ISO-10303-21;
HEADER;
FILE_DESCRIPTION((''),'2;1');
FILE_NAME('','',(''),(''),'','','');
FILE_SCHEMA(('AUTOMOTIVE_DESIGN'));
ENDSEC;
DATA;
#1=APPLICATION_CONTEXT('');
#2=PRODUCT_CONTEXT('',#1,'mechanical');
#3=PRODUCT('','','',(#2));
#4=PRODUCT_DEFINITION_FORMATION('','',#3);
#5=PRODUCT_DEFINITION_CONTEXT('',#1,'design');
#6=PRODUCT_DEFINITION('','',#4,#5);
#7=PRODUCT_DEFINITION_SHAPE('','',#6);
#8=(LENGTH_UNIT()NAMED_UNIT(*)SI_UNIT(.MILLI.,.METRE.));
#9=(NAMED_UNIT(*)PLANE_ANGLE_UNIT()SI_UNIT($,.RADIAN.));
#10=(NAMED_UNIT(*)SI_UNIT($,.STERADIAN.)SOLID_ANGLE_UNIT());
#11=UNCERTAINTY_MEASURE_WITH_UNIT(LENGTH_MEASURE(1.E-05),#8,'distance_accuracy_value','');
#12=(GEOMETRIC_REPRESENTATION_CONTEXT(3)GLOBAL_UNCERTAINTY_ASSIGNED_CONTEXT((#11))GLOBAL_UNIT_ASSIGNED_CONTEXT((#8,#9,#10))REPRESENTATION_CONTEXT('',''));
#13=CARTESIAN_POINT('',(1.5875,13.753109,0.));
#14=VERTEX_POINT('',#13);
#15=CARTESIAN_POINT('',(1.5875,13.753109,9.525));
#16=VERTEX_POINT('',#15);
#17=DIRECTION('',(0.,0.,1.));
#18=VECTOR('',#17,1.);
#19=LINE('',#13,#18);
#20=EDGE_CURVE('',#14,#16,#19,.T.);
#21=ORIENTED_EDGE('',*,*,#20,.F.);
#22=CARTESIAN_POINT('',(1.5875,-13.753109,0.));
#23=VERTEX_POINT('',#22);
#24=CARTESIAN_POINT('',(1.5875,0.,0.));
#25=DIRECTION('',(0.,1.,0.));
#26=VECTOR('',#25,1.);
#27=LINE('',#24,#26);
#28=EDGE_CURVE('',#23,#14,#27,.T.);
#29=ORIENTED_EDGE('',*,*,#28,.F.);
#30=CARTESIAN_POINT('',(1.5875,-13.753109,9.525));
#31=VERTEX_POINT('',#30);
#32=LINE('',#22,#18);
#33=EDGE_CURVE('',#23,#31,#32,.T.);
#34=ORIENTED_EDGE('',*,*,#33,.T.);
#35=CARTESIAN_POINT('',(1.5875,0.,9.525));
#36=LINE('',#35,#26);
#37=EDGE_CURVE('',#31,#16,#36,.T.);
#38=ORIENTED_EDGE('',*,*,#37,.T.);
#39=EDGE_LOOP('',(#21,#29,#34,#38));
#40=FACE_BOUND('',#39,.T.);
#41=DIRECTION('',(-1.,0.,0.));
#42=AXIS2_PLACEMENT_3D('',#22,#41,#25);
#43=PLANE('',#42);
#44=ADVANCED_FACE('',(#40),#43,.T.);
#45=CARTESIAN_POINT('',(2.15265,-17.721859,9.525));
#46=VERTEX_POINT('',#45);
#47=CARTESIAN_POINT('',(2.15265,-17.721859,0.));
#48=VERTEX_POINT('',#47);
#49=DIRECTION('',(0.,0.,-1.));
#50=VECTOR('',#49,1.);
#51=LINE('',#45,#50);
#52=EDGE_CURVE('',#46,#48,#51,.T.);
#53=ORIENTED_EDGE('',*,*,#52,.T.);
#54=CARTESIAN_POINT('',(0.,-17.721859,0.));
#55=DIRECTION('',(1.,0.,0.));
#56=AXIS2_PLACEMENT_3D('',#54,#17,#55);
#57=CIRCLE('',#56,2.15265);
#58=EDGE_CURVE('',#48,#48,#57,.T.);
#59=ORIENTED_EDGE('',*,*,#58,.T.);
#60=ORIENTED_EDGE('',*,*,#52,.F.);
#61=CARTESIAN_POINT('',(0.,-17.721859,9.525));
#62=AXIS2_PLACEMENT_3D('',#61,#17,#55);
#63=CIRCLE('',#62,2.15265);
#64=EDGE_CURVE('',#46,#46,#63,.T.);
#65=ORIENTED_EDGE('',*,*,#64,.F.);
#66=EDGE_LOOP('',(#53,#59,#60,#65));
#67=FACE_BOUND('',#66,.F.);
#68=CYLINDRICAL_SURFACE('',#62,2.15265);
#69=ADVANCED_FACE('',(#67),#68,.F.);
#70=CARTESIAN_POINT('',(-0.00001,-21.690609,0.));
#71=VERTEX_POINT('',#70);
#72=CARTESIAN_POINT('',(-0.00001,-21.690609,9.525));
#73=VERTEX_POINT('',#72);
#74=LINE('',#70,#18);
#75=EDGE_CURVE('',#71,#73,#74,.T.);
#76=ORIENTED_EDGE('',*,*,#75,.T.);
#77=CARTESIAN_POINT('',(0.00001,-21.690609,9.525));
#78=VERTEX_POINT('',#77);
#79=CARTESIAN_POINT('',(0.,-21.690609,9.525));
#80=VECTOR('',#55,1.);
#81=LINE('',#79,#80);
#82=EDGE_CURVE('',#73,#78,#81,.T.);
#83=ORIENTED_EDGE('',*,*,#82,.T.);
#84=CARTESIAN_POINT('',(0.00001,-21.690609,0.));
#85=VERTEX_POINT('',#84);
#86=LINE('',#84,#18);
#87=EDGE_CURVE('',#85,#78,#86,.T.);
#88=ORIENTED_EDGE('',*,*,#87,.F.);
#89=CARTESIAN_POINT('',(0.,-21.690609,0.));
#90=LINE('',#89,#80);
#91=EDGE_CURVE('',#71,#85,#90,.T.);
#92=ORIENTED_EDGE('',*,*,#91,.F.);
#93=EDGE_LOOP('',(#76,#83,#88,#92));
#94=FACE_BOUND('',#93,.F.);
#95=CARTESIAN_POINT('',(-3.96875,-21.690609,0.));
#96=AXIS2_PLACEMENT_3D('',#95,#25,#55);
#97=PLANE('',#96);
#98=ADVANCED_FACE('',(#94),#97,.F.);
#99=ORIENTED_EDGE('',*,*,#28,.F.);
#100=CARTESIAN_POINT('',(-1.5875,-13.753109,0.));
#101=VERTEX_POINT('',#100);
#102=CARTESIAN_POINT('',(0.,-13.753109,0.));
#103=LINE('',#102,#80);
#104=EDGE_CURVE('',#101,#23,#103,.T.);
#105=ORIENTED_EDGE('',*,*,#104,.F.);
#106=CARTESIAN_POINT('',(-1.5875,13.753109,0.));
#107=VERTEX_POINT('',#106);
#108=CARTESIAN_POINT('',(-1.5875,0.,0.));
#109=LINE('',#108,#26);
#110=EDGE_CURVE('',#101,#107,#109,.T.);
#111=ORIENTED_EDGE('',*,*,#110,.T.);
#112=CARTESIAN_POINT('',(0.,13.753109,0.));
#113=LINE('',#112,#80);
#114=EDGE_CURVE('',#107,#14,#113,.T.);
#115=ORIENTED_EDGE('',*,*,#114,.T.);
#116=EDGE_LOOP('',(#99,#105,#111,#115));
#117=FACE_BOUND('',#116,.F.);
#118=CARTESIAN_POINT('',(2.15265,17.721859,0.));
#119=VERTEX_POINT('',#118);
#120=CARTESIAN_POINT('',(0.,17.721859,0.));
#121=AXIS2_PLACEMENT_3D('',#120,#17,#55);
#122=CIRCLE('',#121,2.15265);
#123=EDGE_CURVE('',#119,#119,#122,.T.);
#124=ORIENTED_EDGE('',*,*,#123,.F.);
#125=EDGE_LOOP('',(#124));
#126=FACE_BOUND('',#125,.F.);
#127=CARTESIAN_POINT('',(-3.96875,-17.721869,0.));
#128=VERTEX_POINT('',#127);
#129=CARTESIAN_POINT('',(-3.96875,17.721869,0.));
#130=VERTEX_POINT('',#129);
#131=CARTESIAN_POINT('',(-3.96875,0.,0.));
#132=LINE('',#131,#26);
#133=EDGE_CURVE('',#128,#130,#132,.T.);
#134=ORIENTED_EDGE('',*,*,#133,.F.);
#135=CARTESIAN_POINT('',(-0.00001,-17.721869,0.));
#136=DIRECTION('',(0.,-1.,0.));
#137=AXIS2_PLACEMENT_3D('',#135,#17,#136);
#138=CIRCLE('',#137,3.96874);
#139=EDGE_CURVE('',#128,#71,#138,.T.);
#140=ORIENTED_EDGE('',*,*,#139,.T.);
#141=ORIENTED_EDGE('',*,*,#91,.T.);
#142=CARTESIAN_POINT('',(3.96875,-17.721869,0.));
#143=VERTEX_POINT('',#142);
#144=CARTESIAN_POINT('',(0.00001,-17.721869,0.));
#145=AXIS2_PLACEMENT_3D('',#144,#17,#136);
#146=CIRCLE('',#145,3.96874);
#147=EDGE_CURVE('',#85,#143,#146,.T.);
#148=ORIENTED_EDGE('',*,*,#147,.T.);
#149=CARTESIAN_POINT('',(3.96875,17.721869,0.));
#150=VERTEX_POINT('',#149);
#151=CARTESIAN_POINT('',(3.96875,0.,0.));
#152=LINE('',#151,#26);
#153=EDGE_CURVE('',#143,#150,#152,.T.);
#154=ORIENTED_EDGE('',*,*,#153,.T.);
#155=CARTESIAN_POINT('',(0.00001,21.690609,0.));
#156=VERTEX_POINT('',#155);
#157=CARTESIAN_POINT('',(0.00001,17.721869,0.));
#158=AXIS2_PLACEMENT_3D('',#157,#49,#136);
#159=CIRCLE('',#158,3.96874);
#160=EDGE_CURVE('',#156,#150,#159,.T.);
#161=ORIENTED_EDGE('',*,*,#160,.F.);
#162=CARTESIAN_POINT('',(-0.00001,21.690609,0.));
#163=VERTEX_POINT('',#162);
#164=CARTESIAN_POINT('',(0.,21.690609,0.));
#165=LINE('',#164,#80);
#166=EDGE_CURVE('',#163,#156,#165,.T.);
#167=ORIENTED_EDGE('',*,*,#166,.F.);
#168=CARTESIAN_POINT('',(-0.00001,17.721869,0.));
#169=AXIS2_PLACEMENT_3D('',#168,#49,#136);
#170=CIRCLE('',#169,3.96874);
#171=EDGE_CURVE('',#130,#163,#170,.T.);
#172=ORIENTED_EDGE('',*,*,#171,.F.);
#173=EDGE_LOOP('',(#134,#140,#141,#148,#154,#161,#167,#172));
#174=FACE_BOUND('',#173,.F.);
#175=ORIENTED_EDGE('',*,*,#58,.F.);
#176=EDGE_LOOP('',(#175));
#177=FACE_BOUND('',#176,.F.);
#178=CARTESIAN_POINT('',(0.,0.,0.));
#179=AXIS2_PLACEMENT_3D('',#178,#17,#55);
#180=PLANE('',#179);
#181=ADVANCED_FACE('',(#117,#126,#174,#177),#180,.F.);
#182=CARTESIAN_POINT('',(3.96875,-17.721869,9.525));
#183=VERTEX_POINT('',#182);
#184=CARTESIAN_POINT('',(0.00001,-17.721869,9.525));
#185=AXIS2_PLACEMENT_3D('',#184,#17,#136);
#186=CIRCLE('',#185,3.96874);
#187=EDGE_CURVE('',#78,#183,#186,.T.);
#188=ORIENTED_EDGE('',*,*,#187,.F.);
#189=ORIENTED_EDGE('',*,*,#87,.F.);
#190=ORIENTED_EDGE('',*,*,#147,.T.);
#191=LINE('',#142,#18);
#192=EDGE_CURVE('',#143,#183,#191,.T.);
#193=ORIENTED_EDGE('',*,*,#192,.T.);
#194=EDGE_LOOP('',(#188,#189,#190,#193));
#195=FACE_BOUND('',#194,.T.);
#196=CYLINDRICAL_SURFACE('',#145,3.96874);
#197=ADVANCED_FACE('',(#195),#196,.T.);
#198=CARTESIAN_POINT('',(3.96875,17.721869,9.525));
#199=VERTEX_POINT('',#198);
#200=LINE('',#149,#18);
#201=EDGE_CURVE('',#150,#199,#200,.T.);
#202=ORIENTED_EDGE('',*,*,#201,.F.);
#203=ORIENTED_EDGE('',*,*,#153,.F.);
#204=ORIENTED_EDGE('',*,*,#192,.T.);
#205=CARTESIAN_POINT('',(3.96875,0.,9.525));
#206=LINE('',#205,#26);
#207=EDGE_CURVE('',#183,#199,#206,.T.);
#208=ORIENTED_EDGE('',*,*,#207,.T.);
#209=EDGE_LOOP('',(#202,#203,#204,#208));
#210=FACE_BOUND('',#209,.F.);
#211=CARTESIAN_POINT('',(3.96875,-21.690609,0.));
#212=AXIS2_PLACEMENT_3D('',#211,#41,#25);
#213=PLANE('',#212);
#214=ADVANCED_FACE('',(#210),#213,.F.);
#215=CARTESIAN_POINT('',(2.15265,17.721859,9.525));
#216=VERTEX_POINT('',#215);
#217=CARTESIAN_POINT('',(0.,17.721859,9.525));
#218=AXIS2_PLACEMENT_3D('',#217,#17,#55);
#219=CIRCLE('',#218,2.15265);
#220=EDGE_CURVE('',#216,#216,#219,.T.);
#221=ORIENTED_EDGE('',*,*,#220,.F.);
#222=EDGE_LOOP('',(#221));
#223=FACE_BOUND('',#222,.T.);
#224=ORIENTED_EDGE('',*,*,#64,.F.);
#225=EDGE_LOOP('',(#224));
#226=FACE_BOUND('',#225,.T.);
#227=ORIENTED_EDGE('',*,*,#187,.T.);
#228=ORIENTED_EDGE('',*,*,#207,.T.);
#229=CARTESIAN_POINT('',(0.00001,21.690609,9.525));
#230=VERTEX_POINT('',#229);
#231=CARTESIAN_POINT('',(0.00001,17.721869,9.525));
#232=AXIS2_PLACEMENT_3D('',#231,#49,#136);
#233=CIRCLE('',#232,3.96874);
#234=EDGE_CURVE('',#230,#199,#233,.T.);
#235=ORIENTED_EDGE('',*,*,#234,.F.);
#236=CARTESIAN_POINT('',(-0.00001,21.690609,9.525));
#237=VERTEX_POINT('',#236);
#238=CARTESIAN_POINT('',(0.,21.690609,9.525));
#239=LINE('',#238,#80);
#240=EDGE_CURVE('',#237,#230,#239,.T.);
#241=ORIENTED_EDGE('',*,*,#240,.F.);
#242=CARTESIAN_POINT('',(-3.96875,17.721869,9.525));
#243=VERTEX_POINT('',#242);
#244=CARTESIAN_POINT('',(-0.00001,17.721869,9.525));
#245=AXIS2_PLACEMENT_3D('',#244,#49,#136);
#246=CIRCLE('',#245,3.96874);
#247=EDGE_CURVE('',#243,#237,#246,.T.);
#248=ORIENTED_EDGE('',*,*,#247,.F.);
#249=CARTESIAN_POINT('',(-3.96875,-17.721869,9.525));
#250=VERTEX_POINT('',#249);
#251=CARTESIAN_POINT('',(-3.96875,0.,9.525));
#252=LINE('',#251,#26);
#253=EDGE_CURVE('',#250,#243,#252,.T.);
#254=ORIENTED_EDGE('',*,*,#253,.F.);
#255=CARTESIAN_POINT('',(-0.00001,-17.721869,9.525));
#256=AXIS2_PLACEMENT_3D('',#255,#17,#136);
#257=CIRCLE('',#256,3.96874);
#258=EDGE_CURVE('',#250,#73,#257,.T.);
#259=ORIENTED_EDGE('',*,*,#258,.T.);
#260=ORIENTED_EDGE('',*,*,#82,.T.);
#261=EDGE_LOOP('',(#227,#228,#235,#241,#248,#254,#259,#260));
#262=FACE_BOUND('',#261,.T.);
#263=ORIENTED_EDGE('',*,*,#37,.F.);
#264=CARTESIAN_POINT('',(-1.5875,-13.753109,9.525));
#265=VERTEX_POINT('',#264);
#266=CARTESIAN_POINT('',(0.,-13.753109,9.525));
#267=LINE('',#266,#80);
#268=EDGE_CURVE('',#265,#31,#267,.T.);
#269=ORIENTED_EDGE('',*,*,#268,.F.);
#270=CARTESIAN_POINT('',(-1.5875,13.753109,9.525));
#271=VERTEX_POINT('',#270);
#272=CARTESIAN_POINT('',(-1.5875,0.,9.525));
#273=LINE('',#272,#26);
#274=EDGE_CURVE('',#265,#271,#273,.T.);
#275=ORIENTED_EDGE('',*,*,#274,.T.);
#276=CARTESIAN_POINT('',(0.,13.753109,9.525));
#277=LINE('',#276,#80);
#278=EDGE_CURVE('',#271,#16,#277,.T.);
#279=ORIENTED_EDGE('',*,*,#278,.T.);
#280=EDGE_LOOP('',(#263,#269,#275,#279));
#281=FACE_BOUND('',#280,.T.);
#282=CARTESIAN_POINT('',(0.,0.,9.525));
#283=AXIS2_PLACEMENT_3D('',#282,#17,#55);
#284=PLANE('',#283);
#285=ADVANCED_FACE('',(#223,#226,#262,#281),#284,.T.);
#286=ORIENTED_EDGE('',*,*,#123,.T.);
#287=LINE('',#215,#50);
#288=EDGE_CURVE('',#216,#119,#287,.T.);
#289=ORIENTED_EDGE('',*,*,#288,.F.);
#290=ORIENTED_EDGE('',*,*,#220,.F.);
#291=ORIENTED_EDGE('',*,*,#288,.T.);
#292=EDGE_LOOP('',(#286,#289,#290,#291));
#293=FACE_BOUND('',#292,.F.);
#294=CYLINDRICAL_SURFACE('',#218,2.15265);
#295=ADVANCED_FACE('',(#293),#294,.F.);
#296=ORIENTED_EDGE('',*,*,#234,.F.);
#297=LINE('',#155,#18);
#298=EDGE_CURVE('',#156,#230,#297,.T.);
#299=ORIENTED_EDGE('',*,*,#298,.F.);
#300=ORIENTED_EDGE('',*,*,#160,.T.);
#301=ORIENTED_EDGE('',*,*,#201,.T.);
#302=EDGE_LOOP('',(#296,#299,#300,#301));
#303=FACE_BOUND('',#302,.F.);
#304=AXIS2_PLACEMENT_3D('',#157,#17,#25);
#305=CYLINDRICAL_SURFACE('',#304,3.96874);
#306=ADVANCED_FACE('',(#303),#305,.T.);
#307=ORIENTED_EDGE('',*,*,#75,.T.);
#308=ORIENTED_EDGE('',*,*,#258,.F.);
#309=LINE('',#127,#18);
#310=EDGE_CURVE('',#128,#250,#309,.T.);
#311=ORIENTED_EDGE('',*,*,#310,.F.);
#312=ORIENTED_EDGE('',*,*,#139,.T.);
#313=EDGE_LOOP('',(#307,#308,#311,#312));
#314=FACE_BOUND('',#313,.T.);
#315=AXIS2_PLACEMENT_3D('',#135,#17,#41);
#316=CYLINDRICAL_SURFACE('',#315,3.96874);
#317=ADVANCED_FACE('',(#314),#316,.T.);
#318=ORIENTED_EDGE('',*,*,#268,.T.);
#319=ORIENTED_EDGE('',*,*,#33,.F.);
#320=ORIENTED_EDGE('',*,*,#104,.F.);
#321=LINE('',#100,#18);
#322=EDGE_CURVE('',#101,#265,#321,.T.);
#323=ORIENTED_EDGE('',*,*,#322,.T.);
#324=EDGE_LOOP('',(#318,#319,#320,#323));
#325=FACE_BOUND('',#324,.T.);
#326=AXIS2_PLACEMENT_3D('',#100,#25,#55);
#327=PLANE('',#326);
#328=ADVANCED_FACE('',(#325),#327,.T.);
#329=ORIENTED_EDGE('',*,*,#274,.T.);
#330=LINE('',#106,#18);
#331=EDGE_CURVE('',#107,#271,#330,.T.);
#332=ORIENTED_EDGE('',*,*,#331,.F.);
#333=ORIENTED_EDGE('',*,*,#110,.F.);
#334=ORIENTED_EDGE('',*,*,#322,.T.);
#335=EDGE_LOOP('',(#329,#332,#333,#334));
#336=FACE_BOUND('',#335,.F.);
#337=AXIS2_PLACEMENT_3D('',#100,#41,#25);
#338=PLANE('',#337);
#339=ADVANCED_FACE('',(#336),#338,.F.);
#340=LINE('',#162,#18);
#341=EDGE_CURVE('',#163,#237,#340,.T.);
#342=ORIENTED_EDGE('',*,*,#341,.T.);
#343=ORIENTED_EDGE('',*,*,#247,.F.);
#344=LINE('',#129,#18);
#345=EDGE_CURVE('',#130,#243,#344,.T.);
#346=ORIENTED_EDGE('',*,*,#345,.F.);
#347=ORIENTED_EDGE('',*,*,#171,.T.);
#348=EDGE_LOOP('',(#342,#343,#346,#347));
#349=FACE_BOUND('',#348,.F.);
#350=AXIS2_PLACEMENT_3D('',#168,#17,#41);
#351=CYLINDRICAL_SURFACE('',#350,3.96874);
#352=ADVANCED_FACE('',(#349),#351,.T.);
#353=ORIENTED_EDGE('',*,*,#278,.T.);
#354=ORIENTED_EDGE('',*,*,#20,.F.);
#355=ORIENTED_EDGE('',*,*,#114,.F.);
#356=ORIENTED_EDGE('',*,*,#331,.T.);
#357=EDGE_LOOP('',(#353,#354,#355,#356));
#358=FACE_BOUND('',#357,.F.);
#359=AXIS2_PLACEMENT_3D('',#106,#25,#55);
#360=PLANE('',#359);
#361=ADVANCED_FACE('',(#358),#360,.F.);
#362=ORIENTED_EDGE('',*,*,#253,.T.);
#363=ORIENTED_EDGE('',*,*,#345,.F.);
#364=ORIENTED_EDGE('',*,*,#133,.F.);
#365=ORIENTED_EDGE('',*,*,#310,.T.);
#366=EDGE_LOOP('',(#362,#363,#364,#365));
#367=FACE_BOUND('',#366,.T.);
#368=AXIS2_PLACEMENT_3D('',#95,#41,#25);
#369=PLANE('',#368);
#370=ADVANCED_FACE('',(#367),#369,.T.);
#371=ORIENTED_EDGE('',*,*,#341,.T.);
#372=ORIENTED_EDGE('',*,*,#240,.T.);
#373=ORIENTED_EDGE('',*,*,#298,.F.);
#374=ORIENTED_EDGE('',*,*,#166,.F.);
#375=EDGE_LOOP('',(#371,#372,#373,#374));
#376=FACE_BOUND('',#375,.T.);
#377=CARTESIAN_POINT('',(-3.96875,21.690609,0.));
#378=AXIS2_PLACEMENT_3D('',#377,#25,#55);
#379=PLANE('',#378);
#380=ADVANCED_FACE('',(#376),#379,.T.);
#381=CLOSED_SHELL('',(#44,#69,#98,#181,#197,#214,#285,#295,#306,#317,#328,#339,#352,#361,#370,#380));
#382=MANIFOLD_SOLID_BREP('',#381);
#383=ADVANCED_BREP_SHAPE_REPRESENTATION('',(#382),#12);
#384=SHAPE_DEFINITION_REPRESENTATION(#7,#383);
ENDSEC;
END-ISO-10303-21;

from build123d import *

# Parameters (mm, degrees)
F0_W     = 7.9375
F0_H     = 43.3812188
F0_W_2   = 3.175
F0_H_2   = 27.5062188
F1_DEPTH = 9.525
F2_R     = 2.15265
F3_DEPTH = 9.525
F4_R     = 3.96874


# Not quite as in the source:
# - a fillet or chamfer is up to 0.001 mm smaller than in the source, because OpenCascade refuses the exact size


with BuildPart() as f1:
    # F0 (on Top) → F1 (new body)
    with BuildSketch(Plane.XY):
        Rectangle(F0_W, F0_H)
        Rectangle(F0_W_2, F0_H_2, mode=Mode.SUBTRACT)
    extrude(amount=F1_DEPTH)

    # F2 (on face) → F3 (cut, through all)
    with BuildSketch(Plane.XY.offset(9.525)):
        with Locations((0, 17.7218594)):
            Circle(F2_R)
        with Locations((0, -17.7218594)):
            Circle(F2_R)
    extrude(amount=-F3_DEPTH, mode=Mode.SUBTRACT)

    # F4 (radius 3.96875 in the source; OpenCascade refuses exactly that, so slightly less here)
    f4_edges = [f1.edges().sort_by_distance(p)[0] for p in [
        (-3.96875, -21.690609, 4.7625),
        (3.96875, -21.690609, 4.7625),
        (3.96875, 21.690609, 4.7625),
        (-3.96875, 21.690609, 4.7625),
    ]]
    fillet(f4_edges, radius=F4_R)


solid = f1.part
